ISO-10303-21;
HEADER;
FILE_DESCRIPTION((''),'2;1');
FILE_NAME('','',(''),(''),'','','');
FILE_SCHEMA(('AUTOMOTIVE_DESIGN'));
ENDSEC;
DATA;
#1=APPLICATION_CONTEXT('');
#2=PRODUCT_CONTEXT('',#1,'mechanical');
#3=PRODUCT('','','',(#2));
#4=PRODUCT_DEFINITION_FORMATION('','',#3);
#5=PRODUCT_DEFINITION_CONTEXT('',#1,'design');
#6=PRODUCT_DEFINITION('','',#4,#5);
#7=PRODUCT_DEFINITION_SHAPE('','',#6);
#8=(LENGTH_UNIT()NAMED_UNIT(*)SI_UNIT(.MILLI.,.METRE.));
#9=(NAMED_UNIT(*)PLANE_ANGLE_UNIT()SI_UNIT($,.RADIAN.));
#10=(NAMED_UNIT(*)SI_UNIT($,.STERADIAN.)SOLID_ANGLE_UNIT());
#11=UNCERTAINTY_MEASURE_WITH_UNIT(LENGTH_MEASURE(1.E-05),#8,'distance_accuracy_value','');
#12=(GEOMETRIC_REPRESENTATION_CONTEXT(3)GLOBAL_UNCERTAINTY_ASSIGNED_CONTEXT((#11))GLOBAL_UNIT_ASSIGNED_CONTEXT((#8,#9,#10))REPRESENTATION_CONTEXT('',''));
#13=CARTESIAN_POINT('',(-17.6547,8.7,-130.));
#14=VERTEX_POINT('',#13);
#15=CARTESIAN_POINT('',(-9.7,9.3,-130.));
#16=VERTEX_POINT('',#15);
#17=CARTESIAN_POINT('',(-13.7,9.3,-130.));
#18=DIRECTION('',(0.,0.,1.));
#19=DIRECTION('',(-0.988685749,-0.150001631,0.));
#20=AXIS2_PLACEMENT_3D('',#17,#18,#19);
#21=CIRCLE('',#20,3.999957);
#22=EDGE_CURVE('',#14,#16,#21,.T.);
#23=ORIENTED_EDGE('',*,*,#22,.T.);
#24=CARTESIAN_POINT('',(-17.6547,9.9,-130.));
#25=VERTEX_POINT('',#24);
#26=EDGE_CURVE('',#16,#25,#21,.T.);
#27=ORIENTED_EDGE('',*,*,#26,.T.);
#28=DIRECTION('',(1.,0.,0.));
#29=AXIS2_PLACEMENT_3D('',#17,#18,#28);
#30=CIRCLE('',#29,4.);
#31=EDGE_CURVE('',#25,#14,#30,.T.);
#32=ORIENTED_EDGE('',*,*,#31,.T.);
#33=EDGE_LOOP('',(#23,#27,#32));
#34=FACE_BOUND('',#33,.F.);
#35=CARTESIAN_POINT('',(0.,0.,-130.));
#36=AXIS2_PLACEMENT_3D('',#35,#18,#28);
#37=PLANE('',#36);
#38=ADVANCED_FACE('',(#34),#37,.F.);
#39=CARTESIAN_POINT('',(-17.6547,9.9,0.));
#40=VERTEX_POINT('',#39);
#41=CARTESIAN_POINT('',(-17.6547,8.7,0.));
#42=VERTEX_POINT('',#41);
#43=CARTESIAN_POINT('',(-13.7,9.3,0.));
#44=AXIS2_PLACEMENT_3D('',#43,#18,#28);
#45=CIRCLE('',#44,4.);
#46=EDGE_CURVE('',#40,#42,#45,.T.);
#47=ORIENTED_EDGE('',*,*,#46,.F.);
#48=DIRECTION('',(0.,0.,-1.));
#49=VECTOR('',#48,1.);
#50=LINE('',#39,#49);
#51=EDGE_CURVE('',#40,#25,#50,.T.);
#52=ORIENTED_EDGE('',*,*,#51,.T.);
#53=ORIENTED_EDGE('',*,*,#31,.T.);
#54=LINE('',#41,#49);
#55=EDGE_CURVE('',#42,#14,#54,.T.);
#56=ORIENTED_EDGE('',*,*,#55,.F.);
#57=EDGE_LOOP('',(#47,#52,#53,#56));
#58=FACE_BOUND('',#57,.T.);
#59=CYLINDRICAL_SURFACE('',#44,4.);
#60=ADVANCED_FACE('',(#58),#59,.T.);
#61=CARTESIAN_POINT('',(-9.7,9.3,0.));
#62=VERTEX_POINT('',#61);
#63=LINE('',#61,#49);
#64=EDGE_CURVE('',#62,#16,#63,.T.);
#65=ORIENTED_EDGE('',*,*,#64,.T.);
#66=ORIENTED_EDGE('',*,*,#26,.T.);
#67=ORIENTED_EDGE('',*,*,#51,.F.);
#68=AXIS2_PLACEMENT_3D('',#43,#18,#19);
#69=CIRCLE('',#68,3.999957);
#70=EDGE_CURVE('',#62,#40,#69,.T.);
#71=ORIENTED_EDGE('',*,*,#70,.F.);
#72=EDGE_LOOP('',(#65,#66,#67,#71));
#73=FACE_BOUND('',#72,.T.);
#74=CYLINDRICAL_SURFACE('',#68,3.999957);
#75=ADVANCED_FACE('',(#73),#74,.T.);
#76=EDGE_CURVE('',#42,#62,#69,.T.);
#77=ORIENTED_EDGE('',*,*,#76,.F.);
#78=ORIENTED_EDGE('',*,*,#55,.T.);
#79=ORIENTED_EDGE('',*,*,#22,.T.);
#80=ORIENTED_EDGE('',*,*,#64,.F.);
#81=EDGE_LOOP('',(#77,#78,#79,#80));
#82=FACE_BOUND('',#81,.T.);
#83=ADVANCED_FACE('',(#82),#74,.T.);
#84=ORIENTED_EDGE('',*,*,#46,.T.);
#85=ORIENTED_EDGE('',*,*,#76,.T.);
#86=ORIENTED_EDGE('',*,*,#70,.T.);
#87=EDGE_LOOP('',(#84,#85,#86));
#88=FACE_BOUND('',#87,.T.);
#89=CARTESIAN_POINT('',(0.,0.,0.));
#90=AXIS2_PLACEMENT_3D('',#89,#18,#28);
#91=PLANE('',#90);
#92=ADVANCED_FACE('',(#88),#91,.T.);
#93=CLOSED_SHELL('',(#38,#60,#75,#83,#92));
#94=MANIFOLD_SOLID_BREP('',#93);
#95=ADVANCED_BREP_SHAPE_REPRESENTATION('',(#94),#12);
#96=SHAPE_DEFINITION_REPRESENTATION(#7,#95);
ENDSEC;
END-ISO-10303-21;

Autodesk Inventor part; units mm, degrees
ref_plane "YZ Plane" through (0, 0, 0) normal (1, 0, 0) x (0, 1, 0)
ref_plane "XZ Plane" through (0, 0, 0) normal (0, 1, 0) x (-1, 0, 0)
ref_plane "XY Plane" through (0, 0, 0) normal (0, 0, 1) x (1, 0, 0)
sketch "Sketch1" plane through (0, 0, 0) normal (0, 0, 1) x (1, 0, 0)
  arc A0 (-17.6547, 8.7) -> (-17.6547, 9.9) centre (-13.7, 9.3) ccw projected
  circle A1 centre (-13.7, 9.3) radius 4
  point P0 (0, 0)
extrude "Extrusion1" add sketch "Sketch1" against normal blind 130
properties part number "shaft" material "Steel, Alloy"
